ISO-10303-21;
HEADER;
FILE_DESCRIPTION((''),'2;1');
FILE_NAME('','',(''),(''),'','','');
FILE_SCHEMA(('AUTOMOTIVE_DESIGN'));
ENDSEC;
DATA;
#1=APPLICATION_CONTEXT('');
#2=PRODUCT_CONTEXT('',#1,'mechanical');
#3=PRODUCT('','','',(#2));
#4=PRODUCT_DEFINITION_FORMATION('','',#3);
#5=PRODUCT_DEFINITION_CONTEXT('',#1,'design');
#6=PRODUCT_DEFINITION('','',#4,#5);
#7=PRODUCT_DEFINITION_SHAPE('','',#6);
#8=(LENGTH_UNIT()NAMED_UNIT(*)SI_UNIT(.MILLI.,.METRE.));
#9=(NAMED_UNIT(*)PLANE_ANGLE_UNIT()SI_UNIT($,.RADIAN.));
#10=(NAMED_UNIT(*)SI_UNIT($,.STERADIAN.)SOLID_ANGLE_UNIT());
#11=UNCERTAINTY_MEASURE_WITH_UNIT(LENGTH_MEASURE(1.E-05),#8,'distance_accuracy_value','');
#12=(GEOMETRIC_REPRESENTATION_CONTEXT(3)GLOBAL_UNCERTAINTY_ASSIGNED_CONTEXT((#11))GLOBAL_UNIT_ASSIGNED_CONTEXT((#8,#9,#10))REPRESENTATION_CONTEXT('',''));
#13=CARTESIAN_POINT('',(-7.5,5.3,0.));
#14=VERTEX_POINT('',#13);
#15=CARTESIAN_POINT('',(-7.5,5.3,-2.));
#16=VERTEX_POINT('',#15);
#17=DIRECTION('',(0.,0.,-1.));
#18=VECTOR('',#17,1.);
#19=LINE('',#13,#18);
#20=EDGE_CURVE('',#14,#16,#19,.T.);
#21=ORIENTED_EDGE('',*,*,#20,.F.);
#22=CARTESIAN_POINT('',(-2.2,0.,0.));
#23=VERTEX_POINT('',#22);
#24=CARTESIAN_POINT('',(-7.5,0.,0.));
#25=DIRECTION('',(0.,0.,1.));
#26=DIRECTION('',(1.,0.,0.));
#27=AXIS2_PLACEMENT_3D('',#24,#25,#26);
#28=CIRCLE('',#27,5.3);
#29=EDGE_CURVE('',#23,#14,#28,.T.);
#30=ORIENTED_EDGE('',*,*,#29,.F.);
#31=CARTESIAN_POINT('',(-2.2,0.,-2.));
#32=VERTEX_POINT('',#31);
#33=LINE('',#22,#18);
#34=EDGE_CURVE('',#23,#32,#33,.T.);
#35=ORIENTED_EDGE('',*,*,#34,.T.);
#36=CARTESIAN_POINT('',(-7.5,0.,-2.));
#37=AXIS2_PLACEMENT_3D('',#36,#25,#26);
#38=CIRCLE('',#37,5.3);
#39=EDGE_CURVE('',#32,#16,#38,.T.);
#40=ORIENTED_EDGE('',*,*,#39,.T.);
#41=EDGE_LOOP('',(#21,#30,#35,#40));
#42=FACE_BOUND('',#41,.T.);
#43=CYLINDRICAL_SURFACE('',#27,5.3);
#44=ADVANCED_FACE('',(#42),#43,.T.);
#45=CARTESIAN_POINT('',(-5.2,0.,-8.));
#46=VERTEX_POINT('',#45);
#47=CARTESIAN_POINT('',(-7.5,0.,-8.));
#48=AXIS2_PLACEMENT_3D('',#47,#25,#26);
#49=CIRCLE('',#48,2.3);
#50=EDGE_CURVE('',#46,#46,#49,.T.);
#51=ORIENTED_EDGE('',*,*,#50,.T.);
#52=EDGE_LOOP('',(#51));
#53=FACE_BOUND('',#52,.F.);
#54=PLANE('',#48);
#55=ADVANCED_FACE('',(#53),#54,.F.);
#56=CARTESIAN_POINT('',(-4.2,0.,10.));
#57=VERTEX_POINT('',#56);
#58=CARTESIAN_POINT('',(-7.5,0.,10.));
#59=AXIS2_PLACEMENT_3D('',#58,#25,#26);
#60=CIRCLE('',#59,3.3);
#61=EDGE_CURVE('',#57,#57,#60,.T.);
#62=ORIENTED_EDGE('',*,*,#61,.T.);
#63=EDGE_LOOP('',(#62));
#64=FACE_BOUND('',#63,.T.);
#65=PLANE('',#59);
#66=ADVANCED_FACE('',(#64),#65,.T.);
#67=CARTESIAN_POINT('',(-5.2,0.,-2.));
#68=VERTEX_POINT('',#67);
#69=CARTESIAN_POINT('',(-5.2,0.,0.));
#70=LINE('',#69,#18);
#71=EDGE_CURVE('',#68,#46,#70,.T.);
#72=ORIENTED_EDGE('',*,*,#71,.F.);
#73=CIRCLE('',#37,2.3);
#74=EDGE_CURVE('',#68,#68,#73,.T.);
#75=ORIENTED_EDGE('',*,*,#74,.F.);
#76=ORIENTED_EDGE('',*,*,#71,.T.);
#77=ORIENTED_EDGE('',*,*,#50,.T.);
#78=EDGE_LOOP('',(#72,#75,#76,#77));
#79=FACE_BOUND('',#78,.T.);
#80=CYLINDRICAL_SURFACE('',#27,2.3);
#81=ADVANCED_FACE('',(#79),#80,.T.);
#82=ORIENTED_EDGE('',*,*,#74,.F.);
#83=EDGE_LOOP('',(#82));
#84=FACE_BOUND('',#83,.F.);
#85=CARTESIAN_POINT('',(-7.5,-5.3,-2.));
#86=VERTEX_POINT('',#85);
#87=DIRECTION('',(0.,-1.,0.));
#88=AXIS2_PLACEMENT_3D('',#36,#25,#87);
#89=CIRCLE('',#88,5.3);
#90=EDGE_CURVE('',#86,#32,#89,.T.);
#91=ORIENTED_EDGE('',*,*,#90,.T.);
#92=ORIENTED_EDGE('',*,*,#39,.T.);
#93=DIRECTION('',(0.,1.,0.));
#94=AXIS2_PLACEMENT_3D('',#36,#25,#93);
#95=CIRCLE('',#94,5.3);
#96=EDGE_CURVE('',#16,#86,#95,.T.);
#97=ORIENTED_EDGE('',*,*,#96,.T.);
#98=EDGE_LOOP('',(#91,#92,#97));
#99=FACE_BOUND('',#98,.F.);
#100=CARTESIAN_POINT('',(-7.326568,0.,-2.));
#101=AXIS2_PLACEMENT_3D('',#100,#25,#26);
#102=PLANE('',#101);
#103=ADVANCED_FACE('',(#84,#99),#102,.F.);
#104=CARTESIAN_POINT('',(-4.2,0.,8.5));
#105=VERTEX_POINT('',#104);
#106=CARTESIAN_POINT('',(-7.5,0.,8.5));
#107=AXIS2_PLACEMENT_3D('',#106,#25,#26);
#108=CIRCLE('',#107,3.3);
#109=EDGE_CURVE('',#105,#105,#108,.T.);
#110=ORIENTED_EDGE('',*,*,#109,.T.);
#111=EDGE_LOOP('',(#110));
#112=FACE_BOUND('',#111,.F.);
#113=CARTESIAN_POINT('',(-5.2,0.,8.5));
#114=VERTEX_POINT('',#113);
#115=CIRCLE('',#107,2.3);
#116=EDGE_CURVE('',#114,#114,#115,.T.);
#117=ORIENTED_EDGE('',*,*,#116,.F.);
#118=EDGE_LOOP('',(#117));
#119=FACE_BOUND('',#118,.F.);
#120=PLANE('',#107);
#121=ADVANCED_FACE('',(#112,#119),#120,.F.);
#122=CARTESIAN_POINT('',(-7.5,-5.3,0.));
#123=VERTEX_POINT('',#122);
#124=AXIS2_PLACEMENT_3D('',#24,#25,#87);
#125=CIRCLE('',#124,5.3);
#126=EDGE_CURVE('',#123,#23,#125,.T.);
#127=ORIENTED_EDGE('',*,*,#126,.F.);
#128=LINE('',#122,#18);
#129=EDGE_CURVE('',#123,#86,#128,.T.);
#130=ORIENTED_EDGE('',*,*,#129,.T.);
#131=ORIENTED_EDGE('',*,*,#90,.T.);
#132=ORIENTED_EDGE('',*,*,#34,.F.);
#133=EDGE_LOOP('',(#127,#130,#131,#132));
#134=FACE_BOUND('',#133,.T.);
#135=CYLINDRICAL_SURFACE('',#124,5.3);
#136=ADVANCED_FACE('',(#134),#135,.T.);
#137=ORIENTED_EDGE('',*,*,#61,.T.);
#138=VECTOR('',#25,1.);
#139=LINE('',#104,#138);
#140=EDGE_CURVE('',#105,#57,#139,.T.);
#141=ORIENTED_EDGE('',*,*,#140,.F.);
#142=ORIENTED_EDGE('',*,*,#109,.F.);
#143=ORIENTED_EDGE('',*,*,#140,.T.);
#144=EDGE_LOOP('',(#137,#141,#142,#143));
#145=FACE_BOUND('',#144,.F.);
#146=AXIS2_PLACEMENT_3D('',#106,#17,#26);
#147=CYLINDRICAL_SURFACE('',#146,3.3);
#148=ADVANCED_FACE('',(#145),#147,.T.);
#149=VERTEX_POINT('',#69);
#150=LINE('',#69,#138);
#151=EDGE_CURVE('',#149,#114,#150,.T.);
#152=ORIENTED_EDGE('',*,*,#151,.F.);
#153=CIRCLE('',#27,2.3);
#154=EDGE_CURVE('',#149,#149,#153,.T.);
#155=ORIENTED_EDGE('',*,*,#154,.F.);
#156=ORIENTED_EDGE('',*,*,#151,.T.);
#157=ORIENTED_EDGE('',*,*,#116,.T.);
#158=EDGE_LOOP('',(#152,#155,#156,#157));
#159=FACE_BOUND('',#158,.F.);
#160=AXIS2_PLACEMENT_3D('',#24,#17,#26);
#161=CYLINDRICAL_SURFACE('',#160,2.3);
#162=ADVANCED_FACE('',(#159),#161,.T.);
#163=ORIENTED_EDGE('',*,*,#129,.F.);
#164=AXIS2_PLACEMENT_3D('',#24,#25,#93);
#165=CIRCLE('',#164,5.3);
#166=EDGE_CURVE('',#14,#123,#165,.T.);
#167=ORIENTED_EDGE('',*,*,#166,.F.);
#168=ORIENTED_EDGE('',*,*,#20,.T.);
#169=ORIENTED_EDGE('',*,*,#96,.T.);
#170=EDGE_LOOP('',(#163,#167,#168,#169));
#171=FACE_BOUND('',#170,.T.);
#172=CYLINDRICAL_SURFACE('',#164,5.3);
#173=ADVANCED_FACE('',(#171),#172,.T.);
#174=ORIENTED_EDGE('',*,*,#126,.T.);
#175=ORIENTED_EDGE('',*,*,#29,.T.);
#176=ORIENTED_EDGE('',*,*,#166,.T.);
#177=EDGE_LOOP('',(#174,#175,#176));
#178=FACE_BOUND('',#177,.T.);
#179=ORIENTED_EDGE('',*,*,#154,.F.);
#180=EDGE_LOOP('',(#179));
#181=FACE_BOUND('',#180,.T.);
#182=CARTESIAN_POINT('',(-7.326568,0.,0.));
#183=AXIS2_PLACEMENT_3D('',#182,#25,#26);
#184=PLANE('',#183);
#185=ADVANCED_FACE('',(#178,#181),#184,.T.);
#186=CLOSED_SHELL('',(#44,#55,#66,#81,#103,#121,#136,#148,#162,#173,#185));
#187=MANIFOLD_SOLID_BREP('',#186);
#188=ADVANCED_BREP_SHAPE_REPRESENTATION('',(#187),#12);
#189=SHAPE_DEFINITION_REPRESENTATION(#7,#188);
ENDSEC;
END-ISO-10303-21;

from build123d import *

# Parameters (mm, degrees)
F0_R          = 3.3
F0_R_2        = 2.3
F1_DEPTH      = 2
F2_DEPTH      = 10
F2_DEPTH_BACK = 8
F3_START      = 8.5
F3_DEPTH      = 1.5


with BuildPart() as f1:
    # F0 (on Top) → F1 (new body)
    with BuildSketch(Plane.XY):
        with BuildLine():
            ThreePointArc((-2.2, 0), (-3.7523340597, 3.7476659403), (-7.5, 5.3))
            ThreePointArc((-7.5, 5.3), (-12.8, 0), (-7.5, -5.3))
            ThreePointArc((-7.5, -5.3), (-3.7523340597, -3.7476659403), (-2.2, 0))
        make_face()
        with Locations((-7.5, 0)):
            Circle(F0_R, mode=Mode.SUBTRACT)
        with Locations((-7.5, 0)):
            Circle(F0_R)
        with Locations((-7.5, 0)):
            Circle(F0_R_2, mode=Mode.SUBTRACT)
    extrude(amount=-F1_DEPTH)

    # F0 (on Top) → F2 (join, two sides)
    with BuildSketch(Plane.XY) as f2_sk:
        with Locations((-7.5, 0)):
            Circle(F0_R_2)
    extrude(amount=F2_DEPTH)
    extrude(f2_sk.sketch, amount=-F2_DEPTH_BACK)

    # F0 (on Top) → F3 (join)
    with BuildSketch(Plane.XY.offset(F3_START)):
        with Locations((-7.5, 0)):
            Circle(F0_R)
        with Locations((-7.5, 0)):
            Circle(F0_R_2, mode=Mode.SUBTRACT)
    extrude(amount=F3_DEPTH)


solid = f1.part
